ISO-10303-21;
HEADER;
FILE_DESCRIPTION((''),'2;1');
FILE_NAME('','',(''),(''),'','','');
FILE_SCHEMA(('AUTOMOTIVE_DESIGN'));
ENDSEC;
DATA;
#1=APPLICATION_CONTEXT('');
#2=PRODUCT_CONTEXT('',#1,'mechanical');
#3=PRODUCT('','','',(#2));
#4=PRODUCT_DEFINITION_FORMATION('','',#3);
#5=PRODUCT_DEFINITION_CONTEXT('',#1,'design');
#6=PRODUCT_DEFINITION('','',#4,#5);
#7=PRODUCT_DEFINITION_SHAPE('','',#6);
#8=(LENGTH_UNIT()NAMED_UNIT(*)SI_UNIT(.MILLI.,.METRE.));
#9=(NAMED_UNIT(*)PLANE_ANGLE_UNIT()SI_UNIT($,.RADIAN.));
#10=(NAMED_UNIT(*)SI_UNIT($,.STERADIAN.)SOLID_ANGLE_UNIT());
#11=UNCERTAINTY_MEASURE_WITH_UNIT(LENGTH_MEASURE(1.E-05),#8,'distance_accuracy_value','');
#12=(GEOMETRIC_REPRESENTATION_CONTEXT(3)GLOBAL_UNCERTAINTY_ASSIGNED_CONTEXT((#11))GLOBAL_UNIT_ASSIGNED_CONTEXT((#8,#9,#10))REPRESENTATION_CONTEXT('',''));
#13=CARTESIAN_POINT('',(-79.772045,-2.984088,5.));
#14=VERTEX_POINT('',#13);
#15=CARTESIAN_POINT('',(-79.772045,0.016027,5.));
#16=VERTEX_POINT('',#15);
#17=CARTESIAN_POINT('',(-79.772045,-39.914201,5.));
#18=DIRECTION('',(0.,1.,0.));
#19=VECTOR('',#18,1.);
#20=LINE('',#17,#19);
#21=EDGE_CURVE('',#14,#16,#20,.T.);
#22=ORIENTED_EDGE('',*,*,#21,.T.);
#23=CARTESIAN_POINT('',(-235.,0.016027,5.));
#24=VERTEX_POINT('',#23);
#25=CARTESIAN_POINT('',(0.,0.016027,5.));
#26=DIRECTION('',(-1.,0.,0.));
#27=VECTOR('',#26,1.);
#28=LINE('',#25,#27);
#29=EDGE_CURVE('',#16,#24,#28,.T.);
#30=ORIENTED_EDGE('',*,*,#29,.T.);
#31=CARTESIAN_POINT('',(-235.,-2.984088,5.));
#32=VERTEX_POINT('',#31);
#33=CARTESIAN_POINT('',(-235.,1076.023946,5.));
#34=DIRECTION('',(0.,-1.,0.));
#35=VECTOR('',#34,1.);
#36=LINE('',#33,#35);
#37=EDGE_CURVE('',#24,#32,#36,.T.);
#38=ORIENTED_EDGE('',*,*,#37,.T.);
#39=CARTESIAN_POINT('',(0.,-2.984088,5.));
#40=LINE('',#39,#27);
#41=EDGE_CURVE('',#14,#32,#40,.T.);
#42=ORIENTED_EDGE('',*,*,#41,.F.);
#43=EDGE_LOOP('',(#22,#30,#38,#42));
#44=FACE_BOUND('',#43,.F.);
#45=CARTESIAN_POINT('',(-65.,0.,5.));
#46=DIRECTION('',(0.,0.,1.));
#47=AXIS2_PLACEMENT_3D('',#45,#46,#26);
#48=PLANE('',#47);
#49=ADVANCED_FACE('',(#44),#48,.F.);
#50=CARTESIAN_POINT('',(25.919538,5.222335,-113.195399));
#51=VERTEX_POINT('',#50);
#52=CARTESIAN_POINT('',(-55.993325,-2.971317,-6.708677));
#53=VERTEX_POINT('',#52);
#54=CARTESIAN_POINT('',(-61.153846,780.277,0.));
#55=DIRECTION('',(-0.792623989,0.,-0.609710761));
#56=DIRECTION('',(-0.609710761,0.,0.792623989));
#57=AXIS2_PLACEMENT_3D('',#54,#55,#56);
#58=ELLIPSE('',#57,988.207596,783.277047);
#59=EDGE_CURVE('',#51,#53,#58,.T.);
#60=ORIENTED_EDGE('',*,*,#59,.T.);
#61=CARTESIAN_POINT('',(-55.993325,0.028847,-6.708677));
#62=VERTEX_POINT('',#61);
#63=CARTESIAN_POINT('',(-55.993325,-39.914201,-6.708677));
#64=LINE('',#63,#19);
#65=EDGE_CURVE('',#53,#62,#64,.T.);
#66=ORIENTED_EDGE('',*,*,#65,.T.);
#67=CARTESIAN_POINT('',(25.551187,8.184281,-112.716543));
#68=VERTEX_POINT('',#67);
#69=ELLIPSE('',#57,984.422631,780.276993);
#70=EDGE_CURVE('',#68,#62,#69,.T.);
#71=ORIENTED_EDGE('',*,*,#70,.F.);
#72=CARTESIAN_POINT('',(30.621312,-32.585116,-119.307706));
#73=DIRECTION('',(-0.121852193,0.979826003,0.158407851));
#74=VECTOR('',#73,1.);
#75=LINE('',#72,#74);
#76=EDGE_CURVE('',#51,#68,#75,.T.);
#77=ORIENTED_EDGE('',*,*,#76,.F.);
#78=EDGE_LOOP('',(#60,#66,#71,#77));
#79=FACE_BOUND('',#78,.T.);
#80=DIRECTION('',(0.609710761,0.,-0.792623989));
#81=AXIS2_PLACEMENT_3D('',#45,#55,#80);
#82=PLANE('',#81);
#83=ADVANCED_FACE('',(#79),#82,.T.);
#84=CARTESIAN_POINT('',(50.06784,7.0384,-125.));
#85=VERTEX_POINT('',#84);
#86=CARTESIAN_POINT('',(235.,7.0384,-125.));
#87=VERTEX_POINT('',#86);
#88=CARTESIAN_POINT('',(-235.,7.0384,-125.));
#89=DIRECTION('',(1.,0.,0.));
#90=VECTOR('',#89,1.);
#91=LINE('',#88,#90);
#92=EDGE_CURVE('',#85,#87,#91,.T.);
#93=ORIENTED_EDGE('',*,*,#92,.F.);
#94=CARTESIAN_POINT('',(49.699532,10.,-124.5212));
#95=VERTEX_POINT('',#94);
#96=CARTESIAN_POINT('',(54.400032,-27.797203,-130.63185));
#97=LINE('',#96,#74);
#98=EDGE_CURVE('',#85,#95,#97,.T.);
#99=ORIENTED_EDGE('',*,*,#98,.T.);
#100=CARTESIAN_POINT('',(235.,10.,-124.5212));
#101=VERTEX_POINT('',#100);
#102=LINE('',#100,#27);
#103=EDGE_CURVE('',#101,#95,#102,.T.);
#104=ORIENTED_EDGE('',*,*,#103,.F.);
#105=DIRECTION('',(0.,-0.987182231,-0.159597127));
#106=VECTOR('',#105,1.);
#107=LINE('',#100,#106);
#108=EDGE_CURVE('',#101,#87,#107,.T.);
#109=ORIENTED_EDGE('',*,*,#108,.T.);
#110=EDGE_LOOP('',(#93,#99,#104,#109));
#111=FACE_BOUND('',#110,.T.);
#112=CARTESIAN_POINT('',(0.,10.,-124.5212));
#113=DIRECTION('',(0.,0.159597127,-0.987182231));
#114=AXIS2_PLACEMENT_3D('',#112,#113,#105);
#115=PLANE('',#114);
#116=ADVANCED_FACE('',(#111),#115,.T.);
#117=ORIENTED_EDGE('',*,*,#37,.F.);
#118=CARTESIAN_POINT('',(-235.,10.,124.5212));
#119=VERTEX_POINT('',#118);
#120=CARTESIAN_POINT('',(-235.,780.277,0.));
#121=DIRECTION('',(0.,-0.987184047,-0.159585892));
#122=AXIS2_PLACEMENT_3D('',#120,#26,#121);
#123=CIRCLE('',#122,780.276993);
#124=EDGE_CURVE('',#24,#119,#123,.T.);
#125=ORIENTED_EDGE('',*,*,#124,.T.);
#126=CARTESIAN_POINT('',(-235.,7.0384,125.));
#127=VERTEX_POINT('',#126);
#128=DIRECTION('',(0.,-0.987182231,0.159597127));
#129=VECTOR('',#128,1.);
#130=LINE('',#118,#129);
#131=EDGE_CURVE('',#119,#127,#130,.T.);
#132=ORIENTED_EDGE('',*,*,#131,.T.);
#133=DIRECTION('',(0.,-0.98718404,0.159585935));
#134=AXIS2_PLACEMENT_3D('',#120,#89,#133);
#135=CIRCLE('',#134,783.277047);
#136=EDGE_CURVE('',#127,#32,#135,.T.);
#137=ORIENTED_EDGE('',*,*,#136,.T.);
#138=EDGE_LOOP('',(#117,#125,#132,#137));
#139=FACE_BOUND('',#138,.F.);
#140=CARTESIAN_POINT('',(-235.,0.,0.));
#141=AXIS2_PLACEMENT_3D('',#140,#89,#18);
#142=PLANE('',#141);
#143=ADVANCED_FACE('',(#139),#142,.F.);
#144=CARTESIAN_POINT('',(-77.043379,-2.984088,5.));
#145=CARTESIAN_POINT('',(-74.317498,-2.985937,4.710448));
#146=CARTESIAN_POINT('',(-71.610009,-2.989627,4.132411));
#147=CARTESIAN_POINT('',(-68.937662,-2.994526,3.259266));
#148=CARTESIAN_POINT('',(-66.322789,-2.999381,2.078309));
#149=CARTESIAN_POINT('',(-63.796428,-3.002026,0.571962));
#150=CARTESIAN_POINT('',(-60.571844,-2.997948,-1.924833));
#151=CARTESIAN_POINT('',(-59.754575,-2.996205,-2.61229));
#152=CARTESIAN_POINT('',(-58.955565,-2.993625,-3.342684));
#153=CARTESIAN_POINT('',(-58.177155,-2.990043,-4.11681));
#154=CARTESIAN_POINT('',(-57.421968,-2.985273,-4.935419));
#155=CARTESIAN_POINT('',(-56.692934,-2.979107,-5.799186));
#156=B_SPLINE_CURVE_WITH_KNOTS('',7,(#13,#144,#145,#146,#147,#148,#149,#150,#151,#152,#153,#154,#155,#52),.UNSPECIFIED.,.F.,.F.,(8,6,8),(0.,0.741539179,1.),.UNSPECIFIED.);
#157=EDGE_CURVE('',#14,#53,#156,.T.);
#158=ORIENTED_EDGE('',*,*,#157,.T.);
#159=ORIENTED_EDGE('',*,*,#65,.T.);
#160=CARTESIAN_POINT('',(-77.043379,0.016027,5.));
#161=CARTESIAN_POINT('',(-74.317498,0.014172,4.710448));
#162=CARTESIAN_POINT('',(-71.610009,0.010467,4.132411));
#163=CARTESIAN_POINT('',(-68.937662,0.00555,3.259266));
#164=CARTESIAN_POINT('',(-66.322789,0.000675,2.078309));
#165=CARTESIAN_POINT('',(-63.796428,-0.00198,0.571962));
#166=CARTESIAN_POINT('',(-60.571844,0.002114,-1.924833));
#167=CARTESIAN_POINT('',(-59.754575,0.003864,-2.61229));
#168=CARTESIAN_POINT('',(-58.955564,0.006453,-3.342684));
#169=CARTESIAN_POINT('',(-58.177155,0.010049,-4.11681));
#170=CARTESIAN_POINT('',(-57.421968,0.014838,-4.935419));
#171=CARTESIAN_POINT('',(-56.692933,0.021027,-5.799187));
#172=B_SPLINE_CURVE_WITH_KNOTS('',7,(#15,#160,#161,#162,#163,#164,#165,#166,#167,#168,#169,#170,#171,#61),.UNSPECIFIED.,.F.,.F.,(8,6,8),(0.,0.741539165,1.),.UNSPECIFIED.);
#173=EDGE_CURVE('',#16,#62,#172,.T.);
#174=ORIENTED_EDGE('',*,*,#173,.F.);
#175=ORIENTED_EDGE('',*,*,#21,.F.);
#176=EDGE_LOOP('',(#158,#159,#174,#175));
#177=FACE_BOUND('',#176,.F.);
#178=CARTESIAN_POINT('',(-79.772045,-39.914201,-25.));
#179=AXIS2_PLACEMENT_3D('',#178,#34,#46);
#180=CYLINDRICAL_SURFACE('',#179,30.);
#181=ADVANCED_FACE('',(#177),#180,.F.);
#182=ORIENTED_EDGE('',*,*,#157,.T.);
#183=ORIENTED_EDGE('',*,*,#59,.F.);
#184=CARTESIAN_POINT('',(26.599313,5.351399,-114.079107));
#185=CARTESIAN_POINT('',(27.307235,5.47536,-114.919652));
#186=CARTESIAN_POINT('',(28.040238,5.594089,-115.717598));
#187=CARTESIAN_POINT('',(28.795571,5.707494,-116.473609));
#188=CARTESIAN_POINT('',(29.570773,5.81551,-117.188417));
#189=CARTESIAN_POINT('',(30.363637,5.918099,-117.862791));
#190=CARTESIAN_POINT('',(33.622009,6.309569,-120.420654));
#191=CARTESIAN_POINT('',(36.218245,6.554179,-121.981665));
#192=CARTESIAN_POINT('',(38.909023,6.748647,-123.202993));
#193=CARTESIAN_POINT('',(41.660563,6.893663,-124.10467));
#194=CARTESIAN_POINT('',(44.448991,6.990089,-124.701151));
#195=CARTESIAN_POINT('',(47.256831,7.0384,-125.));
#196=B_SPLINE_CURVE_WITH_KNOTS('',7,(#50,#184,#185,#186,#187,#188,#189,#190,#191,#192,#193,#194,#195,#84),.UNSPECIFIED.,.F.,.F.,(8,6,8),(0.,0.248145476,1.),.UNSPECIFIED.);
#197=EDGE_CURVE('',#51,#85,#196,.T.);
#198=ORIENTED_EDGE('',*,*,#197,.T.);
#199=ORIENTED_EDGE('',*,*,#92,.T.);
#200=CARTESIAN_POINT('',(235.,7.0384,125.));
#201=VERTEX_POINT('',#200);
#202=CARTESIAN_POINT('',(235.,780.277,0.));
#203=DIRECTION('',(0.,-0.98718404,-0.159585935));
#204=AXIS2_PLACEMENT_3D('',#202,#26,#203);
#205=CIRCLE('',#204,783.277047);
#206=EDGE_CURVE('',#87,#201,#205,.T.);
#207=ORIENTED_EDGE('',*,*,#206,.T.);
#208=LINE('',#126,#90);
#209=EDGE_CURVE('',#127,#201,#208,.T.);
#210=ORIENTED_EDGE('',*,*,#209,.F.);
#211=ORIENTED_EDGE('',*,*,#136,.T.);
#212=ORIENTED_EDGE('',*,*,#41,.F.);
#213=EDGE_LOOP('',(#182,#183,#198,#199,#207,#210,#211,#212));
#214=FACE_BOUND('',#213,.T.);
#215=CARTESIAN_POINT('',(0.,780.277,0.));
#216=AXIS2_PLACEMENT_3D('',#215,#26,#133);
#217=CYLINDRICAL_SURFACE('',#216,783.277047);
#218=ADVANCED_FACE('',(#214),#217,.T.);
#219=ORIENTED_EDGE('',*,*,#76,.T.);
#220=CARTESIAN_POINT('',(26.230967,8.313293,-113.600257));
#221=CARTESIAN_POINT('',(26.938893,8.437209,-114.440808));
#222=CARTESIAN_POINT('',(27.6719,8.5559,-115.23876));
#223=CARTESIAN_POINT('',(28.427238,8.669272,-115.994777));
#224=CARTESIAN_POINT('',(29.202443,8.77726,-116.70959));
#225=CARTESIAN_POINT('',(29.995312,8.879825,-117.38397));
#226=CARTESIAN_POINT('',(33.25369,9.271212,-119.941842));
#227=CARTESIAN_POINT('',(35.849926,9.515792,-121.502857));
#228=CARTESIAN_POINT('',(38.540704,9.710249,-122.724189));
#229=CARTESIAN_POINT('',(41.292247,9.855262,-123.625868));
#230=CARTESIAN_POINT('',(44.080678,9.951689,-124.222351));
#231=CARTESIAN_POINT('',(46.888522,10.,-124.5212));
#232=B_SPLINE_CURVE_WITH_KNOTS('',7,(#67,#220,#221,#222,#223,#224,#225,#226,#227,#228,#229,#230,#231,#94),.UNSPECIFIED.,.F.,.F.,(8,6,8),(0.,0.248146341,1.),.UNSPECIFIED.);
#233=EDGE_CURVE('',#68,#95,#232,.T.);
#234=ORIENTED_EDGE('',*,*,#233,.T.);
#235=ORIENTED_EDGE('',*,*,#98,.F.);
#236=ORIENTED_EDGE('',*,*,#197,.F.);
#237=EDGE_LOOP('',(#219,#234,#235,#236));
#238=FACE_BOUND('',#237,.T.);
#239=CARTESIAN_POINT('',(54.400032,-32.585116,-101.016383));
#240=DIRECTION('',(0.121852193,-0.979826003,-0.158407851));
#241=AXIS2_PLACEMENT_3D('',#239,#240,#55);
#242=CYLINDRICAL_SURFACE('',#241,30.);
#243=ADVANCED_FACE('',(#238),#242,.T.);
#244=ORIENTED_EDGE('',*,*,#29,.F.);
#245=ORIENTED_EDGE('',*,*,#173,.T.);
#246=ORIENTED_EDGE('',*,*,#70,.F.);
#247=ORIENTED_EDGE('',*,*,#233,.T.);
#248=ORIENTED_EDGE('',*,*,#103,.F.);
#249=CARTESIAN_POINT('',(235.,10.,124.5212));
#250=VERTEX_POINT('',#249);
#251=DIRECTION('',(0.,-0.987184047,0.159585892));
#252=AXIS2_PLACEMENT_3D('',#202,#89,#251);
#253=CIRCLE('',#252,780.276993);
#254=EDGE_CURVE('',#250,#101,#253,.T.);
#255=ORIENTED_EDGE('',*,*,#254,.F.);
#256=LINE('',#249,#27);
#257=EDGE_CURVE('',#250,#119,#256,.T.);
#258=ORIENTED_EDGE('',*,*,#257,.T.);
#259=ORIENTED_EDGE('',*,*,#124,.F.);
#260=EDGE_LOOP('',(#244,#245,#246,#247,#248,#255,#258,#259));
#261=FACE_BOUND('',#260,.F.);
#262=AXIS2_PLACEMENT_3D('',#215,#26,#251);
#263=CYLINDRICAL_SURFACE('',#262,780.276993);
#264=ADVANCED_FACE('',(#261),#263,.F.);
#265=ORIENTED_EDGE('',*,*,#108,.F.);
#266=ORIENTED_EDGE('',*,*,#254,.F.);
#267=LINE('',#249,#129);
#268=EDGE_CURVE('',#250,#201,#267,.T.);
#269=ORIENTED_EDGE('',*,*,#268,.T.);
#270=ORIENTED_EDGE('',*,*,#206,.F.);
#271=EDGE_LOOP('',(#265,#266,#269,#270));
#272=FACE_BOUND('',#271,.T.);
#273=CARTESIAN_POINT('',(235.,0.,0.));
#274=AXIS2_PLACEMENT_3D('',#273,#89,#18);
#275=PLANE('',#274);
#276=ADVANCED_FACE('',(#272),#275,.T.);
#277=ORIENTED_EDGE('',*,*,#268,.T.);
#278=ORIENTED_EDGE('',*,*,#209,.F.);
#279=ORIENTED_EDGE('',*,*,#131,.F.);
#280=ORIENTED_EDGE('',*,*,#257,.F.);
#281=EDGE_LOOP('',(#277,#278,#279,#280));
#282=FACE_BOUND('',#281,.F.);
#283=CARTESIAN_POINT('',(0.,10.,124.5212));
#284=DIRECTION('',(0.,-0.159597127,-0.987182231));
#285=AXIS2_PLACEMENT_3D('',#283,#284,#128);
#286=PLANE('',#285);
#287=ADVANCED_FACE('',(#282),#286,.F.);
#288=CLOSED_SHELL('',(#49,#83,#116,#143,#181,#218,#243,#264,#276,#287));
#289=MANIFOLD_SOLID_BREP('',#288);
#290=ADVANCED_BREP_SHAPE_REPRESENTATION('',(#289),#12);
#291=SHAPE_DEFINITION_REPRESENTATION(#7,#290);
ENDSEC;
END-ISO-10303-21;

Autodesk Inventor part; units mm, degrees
ref_plane "YZ Plane" through (0, 0, 0) normal (1, 0, 0) x (0, 1, 0)
ref_plane "XZ Plane" through (0, 0, 0) normal (0, 1, 0) x (-1, 0, 0)
ref_plane "XY Plane" through (0, 0, 0) normal (0, 0, 1) x (1, 0, 0)
sketch "スケッチ1" plane through (0, 0, 0) normal (1, 0, 0) x (0, 1, 0)
  arc A0 (7.0384, 125) -> (7.0384, -125) centre (780.277, 0) ccw
  arc A1 (10, 124.5212) -> (10, -124.5212) centre (780.277, 0) ccw
  line L0 (10, 124.5212) -> (7.0384, 125)
  line L1 (10, -124.5212) -> (7.0384, -125)
  line L2 (0, -175) -> (0, 175) projected
  line L3 (10, 124.5212) -> (10, -124.5212)
  point P0 (0, 0)
  point P1 (0, 0)
  dimension "d0" = 3
  dimension "d1" = 250
  dimension "d2" = 10
extrude "押し出し1" add sketch "スケッチ1" along normal mid plane 470 contours L0 A1 L2 A0 | L2 A0 | L2 A1 L1 A0
sketch "スケッチ2" plane through (0, 0, 0) normal (0, 1, 0) x (-1, 0, 0)
  line L0 (65, 5) -> (235, 5)
  line L1 (235, -125) -> (-235, -125) projected
  line L2 (235, 124.5212) -> (235, -124.5212) projected
  line L3 (235, -124.5212) -> (-235, -124.5212) projected
  line L4 (-235, 125) -> (235, 125) projected
  line L5 (65, 5) -> (-35, -125)
  line L6 (-235, -124.5212) -> (-235, 124.5212) projected
  line L7 (235, 5) -> (235, -125)
  line L8 (-35, -125) -> (235, -125)
  point P0 (0, 0)
  dimension "d5" = 120
  dimension "d6" = 200
  dimension "d7" = 300
extrude "押し出し2" cut sketch "スケッチ2" along normal through all both and the other way through all
fillet "フィレット1" radius 30 2 edges at (-65, -1.484, 5) (34.8159, 8.5192, -124.7606)
properties part number "type7_element_base" material "CFRP"
